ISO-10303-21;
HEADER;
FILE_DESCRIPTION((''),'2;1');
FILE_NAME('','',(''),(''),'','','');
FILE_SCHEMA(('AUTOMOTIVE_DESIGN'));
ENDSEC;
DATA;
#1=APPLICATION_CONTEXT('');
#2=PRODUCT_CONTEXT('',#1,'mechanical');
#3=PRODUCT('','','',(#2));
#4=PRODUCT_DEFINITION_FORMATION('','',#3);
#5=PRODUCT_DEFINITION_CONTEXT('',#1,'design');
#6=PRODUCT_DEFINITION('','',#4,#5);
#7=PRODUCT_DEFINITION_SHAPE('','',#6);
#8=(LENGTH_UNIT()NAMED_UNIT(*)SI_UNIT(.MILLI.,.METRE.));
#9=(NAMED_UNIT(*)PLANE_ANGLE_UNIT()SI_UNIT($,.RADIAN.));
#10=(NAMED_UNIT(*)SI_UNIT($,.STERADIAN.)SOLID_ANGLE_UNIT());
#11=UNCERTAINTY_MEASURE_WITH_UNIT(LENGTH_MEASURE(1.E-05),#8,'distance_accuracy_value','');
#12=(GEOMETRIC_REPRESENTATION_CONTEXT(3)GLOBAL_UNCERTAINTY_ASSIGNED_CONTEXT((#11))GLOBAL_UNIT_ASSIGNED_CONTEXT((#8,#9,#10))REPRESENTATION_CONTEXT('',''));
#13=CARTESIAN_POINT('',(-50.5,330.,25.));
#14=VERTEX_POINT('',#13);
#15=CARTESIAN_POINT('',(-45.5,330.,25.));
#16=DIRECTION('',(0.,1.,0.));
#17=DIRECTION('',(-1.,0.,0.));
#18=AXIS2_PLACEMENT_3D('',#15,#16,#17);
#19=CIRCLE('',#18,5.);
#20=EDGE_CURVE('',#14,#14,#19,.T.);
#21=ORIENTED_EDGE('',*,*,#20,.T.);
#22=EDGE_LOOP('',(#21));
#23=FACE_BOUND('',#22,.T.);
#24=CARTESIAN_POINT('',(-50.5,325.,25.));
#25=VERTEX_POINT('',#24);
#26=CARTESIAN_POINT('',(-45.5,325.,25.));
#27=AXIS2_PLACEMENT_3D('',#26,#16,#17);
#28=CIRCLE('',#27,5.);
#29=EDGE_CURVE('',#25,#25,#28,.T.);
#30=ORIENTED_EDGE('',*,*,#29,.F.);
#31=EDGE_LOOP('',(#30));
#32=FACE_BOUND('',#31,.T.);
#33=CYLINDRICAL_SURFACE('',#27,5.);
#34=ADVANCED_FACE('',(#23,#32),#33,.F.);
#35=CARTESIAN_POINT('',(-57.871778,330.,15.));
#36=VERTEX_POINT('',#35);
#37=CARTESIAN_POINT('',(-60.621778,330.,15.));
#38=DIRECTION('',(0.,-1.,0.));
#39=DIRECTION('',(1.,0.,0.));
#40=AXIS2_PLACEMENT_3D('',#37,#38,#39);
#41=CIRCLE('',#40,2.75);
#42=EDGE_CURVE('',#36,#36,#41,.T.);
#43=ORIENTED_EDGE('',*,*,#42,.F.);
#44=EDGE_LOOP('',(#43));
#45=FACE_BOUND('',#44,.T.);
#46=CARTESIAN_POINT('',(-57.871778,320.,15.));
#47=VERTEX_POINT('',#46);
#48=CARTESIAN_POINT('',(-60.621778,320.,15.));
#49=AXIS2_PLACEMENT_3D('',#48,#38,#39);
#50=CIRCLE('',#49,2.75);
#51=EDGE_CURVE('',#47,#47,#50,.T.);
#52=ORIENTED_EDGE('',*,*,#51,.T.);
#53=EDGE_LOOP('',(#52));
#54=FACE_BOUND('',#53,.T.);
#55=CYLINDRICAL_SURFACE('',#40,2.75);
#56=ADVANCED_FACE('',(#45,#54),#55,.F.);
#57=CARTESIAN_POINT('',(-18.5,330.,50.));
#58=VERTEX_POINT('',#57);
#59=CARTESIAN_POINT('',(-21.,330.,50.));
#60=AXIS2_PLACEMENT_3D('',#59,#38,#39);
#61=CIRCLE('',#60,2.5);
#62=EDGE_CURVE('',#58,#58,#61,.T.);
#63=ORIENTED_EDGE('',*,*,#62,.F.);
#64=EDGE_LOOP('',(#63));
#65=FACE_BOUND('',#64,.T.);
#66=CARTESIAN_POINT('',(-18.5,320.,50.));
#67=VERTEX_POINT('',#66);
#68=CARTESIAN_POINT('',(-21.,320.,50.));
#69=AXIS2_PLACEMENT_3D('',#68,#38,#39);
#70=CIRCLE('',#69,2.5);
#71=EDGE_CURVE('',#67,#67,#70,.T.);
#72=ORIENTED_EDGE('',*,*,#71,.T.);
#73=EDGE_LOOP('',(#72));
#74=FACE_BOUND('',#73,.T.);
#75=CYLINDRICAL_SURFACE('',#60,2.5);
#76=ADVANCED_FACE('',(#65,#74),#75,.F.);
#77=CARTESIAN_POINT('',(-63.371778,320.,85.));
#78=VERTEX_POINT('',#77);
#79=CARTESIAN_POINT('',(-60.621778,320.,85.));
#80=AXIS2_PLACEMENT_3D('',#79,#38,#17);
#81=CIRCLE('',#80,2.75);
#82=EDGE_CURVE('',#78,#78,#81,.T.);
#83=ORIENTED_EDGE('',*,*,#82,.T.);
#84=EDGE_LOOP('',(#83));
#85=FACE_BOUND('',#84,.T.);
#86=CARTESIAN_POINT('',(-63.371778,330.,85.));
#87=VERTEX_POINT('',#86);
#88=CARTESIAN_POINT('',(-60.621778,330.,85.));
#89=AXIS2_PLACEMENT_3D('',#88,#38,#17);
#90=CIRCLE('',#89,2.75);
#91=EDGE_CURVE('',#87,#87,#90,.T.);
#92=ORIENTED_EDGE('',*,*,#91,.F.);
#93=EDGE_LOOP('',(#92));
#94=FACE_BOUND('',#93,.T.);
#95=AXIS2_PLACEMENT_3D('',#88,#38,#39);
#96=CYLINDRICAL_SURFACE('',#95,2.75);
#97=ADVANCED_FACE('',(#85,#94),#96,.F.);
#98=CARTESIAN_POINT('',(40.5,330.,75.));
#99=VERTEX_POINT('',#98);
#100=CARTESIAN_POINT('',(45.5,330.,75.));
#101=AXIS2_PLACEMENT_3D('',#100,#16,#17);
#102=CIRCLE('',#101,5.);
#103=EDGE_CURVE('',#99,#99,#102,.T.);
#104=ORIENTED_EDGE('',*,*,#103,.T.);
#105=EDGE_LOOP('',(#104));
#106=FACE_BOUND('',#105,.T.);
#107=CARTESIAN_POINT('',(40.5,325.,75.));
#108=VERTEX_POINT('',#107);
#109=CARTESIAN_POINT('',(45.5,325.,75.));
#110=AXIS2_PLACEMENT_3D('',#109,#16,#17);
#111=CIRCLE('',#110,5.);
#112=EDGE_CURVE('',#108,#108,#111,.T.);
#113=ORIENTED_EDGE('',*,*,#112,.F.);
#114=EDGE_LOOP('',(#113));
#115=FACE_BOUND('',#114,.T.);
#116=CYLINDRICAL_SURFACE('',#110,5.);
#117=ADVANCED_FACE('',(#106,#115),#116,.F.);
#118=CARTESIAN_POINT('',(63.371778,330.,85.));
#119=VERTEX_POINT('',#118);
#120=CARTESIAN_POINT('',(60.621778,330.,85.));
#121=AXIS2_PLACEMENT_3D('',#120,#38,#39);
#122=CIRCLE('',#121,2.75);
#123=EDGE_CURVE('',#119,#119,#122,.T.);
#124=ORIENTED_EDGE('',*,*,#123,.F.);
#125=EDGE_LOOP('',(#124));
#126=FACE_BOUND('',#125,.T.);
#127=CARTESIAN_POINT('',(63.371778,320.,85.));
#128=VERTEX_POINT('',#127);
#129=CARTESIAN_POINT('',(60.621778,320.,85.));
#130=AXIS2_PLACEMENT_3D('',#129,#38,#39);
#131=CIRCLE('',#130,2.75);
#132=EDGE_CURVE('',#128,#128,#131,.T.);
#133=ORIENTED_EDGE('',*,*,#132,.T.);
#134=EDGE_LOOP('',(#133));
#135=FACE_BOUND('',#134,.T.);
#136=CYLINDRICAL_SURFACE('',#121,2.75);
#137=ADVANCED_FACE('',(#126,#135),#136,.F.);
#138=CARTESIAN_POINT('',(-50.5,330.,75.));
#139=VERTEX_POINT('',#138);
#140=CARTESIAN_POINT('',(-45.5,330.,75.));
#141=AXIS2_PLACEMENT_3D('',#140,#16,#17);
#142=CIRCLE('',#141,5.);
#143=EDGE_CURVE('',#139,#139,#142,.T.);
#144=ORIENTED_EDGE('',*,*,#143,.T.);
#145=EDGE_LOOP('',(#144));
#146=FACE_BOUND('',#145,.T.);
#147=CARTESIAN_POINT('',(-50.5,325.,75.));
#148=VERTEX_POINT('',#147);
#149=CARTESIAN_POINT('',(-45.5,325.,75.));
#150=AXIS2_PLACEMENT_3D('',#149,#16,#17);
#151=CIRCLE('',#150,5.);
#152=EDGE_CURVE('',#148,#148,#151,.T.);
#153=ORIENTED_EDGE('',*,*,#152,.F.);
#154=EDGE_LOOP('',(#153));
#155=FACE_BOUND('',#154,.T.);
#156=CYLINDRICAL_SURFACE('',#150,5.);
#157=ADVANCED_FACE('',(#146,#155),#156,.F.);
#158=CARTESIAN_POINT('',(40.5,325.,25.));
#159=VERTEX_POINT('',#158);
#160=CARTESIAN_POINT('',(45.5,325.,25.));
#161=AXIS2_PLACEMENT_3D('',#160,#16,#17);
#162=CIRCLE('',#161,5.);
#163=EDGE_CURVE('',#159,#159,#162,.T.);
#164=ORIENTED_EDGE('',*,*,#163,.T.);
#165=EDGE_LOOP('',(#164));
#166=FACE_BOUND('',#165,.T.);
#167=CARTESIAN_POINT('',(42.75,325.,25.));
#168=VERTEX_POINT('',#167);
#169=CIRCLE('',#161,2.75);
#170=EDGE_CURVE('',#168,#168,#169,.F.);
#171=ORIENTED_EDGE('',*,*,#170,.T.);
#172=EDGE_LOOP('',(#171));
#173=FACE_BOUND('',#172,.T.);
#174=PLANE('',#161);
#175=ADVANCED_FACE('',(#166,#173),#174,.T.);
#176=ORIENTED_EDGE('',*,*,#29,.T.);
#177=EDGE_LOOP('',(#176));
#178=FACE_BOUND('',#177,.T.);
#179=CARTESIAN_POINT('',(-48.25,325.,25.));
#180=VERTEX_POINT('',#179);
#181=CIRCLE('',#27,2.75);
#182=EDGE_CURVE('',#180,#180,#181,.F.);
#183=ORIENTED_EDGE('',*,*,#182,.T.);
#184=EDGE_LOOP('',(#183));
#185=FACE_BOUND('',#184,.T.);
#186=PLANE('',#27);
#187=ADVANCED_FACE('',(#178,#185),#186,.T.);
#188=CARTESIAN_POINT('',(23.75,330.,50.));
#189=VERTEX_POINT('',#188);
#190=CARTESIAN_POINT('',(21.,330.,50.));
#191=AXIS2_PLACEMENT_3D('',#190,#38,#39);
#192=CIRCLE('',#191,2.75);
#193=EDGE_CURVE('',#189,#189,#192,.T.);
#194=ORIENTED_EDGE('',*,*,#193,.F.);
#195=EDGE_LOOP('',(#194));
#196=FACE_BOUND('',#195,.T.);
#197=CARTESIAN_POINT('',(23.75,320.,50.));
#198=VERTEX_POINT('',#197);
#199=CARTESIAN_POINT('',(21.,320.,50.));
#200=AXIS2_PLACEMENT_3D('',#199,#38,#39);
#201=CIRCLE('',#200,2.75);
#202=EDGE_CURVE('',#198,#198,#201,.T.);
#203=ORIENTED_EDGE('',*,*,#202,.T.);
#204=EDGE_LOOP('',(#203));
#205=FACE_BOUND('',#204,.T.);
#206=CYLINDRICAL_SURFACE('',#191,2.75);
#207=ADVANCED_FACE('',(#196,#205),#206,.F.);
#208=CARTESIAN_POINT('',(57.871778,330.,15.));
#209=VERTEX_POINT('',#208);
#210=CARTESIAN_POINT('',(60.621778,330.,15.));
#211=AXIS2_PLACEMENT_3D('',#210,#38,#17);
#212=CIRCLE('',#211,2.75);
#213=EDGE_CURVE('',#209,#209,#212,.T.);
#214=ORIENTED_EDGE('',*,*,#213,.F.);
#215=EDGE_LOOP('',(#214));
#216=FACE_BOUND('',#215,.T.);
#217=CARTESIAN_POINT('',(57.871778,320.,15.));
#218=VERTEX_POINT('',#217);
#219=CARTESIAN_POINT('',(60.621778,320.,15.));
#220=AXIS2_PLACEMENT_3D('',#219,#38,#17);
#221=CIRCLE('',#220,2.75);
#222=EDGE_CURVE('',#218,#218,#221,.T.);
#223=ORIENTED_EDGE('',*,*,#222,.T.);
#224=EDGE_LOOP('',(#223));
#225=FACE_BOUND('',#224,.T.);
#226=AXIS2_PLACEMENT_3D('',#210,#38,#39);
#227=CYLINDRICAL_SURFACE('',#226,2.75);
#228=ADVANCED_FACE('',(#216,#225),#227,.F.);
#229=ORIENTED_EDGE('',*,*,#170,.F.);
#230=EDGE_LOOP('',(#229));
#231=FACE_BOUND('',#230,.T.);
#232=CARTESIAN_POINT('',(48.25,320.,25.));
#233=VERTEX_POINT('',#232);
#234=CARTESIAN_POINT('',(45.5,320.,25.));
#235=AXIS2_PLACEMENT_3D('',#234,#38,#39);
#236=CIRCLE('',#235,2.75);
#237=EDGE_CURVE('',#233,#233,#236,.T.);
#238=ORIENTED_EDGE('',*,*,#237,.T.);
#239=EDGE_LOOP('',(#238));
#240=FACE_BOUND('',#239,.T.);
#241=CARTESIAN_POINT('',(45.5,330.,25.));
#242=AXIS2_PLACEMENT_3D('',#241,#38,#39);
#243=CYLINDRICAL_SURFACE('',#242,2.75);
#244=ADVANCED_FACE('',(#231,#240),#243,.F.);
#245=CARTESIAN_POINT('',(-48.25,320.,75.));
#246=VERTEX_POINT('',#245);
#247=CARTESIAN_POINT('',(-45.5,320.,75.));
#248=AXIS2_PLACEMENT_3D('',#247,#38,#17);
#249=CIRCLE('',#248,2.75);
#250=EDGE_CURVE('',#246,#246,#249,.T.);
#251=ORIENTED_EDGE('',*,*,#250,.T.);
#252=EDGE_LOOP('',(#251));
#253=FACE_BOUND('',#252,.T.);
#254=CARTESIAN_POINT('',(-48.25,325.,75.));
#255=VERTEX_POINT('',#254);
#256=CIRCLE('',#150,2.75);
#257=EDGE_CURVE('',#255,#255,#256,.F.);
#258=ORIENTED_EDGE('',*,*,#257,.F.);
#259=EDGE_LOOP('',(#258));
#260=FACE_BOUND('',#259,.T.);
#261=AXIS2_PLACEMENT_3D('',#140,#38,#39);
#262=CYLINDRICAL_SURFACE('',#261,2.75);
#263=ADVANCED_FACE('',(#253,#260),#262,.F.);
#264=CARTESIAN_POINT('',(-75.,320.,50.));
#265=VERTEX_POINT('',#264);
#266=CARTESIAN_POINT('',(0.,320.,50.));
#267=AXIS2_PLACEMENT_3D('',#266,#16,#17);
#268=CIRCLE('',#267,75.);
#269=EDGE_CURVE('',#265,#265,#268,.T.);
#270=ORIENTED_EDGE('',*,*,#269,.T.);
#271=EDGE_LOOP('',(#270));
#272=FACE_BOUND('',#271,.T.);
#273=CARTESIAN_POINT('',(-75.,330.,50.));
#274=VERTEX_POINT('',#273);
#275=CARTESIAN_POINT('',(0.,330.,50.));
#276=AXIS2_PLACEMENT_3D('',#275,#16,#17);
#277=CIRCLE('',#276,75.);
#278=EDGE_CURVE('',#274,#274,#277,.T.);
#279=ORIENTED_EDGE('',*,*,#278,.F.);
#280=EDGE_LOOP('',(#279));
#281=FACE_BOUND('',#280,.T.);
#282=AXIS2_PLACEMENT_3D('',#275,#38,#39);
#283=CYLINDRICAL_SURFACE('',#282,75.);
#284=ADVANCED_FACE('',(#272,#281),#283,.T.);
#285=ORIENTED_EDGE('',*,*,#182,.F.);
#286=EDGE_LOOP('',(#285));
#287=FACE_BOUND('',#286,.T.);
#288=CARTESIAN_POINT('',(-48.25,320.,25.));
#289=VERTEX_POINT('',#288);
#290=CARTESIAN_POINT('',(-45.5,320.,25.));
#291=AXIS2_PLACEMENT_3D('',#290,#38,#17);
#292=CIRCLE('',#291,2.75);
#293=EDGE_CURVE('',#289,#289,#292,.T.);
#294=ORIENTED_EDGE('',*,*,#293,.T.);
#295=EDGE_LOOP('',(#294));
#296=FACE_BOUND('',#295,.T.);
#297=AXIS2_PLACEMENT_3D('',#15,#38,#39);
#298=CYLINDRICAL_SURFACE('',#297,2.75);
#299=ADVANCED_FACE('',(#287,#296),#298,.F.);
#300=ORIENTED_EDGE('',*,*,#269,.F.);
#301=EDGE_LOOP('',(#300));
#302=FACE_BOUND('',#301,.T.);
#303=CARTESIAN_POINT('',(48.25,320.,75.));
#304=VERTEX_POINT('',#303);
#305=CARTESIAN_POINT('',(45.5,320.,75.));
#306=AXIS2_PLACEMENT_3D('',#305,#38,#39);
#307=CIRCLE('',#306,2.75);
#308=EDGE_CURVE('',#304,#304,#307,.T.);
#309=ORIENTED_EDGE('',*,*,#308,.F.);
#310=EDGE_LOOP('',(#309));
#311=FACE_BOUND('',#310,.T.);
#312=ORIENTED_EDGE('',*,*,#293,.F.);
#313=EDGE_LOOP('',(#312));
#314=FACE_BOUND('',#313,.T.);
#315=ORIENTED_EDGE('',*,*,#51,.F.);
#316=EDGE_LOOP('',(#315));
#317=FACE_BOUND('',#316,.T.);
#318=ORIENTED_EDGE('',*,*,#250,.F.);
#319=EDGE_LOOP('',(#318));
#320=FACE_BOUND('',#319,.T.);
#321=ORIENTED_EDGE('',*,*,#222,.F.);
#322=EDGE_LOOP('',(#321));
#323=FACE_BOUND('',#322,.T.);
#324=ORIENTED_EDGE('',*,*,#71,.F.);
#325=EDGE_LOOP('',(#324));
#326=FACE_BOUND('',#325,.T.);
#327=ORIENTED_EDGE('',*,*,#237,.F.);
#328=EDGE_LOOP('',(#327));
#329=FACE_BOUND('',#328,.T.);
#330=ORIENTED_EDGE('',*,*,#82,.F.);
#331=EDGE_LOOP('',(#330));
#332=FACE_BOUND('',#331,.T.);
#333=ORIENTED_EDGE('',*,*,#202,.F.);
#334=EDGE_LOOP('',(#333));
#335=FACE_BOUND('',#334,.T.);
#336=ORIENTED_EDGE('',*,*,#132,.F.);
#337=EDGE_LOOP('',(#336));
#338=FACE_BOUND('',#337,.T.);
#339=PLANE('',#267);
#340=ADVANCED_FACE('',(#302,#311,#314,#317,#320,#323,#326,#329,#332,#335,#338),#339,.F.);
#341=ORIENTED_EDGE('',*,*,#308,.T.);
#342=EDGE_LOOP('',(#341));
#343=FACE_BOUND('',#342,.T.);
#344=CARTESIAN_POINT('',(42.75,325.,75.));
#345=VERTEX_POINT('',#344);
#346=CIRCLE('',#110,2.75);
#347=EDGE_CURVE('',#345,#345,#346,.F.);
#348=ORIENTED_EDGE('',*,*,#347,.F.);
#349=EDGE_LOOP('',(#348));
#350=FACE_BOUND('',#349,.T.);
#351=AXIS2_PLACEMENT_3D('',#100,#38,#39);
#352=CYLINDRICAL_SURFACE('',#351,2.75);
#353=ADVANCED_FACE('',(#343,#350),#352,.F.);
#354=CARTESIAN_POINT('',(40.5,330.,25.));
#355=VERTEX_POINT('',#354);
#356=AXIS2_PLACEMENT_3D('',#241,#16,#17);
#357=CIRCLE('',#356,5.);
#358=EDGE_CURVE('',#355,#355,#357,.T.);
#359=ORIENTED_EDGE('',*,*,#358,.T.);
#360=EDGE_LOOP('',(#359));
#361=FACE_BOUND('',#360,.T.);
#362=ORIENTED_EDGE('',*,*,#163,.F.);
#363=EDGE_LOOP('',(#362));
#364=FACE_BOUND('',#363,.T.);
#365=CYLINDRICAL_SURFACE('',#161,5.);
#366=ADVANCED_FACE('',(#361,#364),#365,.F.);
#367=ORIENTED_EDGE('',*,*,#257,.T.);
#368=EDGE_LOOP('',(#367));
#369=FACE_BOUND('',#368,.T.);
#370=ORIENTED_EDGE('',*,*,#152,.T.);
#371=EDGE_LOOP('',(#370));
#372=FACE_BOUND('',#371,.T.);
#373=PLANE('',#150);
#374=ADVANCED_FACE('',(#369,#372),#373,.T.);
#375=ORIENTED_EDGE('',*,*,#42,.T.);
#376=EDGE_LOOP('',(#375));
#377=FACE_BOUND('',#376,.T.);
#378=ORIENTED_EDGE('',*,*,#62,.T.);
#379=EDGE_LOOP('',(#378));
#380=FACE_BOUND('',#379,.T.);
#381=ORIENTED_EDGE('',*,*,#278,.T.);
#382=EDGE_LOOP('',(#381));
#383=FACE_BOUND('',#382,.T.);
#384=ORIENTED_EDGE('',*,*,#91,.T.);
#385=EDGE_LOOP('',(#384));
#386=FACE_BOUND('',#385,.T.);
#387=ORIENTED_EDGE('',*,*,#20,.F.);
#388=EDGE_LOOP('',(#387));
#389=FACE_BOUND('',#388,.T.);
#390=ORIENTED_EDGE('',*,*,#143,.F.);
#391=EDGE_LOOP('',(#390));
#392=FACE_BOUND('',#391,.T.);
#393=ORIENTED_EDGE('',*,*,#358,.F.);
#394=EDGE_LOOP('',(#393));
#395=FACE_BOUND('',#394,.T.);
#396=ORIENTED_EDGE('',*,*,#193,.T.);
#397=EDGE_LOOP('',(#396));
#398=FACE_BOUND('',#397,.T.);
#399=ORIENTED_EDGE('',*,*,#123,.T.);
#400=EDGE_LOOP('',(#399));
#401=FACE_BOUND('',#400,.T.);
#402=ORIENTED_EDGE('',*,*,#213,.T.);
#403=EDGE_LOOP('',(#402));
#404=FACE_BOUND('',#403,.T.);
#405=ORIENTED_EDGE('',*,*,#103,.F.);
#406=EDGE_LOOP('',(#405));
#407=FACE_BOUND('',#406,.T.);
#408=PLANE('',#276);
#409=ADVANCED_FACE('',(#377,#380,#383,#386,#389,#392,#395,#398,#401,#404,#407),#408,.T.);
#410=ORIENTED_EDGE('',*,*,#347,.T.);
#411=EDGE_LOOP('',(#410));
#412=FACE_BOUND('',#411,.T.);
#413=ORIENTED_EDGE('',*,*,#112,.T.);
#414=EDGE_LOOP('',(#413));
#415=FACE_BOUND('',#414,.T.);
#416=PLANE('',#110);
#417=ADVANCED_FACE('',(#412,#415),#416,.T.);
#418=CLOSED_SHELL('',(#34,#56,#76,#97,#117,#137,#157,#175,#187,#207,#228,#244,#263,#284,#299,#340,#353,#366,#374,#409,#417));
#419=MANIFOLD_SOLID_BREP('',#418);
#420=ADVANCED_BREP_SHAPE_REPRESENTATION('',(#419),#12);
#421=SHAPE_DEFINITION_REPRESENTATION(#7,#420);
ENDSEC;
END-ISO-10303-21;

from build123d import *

# Parameters (mm, degrees)
SKETCH_1_R                   = 11
EXTRUDE_567_DEPTH            = 100
EXTRUDE_START                = -100
SKETCH_2_R                   = 11
EXTRUDE_876_DEPTH            = 100
EXTRUDE_2692_DEPTH           = 100
CUT_EXTRUDE_4149_DEPTH       = 534.010318849
CUT_EXTRUDE_4149_DEPTH_BACK  = 534.010318849
SKETCH_3_W                   = 90
SKETCH_3_H                   = 380
SKETCH_5_R                   = 2.5
EXTRUDE_4715_DEPTH           = 100
SKETCH_6_W                   = 191.177045066
SKETCH_6_H                   = 235.084722287
CUT_EXTRUDE_5029_DEPTH       = 84
SKETCH_7_R                   = 75
EXTRUDE_5317_DEPTH           = 10
CUT_EXTRUDE_6099_DEPTH       = 361.763080151
CUT_EXTRUDE_6099_DEPTH_BACK  = 361.763080151
FILLET_2_R                   = 2
MIRROR_START                 = 95
MIRROR_1_DEPTH               = 5
CUT_EXTRUDE_11152_DEPTH      = 361.763080151
CUT_EXTRUDE_11152_DEPTH_BACK = 361.763080151
SKETCH_12_W                  = 10
SKETCH_12_H                  = 20
FILLET_3_R                   = 1
CUT_EXTRUDE_START            = -5
CUT_EXTRUDE_12033_OUTLINE_R  = 5
CUT_EXTRUDE_12033_DEPTH      = 5
CUT_EXTRUDE_7_DEPTH          = 361.763080151
CUT_EXTRUDE_7_DEPTH_BACK     = 361.763080151
SKETCH_14_W                  = 10
SKETCH_14_H                  = 20
FILLET_4_R                   = 1
CUT_EXTRUDE_START_2          = -129
SKETCH_15_R                  = 11
CUT_EXTRUDE_8_DEPTH          = 129
SKETCH_16_R                  = 13
CUT_EXTRUDE_9_DEPTH          = 0.75
CUT_EXTRUDE_START_3          = -0.75
SKETCH_17_R                  = 13
CUT_EXTRUDE_10_DEPTH         = 0.75
SKETCH_18_R                  = 9.5
CUT_EXTRUDE_11_DEPTH         = 113
CUT_EXTRUDE_12_DEPTH         = 361.763080151
CUT_EXTRUDE_12_DEPTH_BACK    = 361.763080151
CUT_EXTRUDE_13_DEPTH         = 147.116391962
CUT_EXTRUDE_13_DEPTH_BACK    = 147.116391962
SKETCH_22_R                  = 2.75
SKETCH_22_R_2                = 2.5
SKETCH_26_R                  = 5
CUT_EXTRUDE_15_DEPTH         = 5


# Read off the part's stored shape, not the designer's step: 镜向1, 电机安装轴承孔
with BuildPart() as part:
    # 草图1 → Extrude 567 (new body)
    with BuildSketch(Plane.XY):
        with BuildLine():
            Line((-18, 500), (-18, 0))
            ThreePointArc((-18, 0), (0, -18), (18, 0))
            Line((18, 0), (18, 500))
            ThreePointArc((18, 500), (0, 518), (-18, 500))
        make_face()
        with Locations((0, 500)):
            Circle(SKETCH_1_R, mode=Mode.SUBTRACT)
        Circle(SKETCH_1_R, mode=Mode.SUBTRACT)
    extrude(amount=EXTRUDE_567_DEPTH)

    # 草图2 → Extrude 876 (add)
    with BuildSketch(Plane.XY.offset(100).offset(EXTRUDE_START)):
        with BuildLine():
            Line((18, 61.301270189), (25, 61.301270189))
            ThreePointArc((25, 61.301270189), (40.588457268, 52.301270189), (40.588457268, 34.301270189))
            Line((40.588457268, 34.301270189), (15.588457268, -9))
            ThreePointArc((15.588457268, -9), (-4.658742812, -17.386664873), (-18, 0))
            Line((-18, 0), (-18, 61.301270189))
            Line((-18, 61.301270189), (18, 61.301270189))
        make_face()
        with Locations((25, 43.301270189)):
            Circle(SKETCH_2_R, mode=Mode.SUBTRACT)
        Circle(SKETCH_2_R, mode=Mode.SUBTRACT)
    extrude(amount=EXTRUDE_876_DEPTH)

    # 草图10 → Extrude 2692 (add)
    with BuildSketch(Plane(origin=(0, 0, 0), x_dir=(-1, 0, 0), z_dir=(0, 0, -1))):
        with BuildLine():
            Line((-41.914467174, 37.144907609), (-58, 81.339545828))
            Line((-58, 81.339545828), (-58, 320))
            Line((-58, 320), (-18, 320))
            Line((-18, 320), (-18, 61.301270189))
            Line((-18, 61.301270189), (-25, 61.301270189))
            ThreePointArc((-25, 61.301270189), (-39.744736797, 53.625646044), (-41.914467174, 37.144907609))
        make_face()
        with BuildLine():
            Line((12.727922061, -12.727922061), (58, 32.544155877))
            Line((58, 32.544155877), (58, 320))
            Line((58, 320), (18, 320))
            Line((18, 320), (18, 0))
            ThreePointArc((18, 0), (16.629831585, -6.888301783), (12.727922061, -12.727922061))
        make_face()
    extrude(amount=-EXTRUDE_2692_DEPTH)

    # 草图3 → Cut-Extrude 4149 (cut, two sides: drawn at the far end of the back side and taken through both)
    with BuildSketch(Plane.ZY.offset(18).offset(-CUT_EXTRUDE_4149_DEPTH_BACK)):
        with Locations((50, 150)):
            Rectangle(SKETCH_3_W, SKETCH_3_H)
    extrude(amount=CUT_EXTRUDE_4149_DEPTH + CUT_EXTRUDE_4149_DEPTH_BACK, mode=Mode.SUBTRACT)

    # 草图5 → Extrude 4715 (add)
    with BuildSketch(Plane.XY.offset(100)):
        with Locations(Location((0, 250, 0), (0, 0, 90))):
            Circle(SKETCH_5_R)
    extrude(amount=-EXTRUDE_4715_DEPTH)

    # 草图6 → Cut-Extrude 5029 (cut)
    with BuildSketch(Plane(origin=(18, 0, 0), x_dir=(0, 0, -1), z_dir=(1, 0, 0))):
        with Locations((-50.962374235, 437.542361144)):
            Rectangle(SKETCH_6_W, SKETCH_6_H)
    extrude(amount=-CUT_EXTRUDE_5029_DEPTH, mode=Mode.SUBTRACT)

    # 草图7 → Extrude 5317 (add)
    with BuildSketch(Plane(origin=(0, 320, 0), x_dir=(1, 0, 0), z_dir=(0, 1, 0))):
        with Locations(Location((0, -50, 0), (0, 0, 320.654170234))):
            Circle(SKETCH_7_R)
    extrude(amount=EXTRUDE_5317_DEPTH)

    # 草图10<3> → Cut-Extrude 6099 (cut, two sides: drawn at the far end of the back side and taken through both)
    with BuildSketch(Plane(origin=(0, 0, 0), x_dir=(-1, 0, 0), z_dir=(0, 0, -1)).offset(-CUT_EXTRUDE_6099_DEPTH_BACK)):
        Polygon((50, 310), (18, 310), (18, 278), align=None)
        Polygon((-18, 278), (-18, 310), (-50, 310), align=None)
        Polygon((-18, 227.925713543), (-18, 259.925713543), (-50, 259.925713543), align=None)
        Polygon((50, 259.925713543), (18, 259.925713543), (18, 227.925713543), align=None)
        Polygon((50, 248.612005044), (50, 216.612005044), (18, 216.612005044), align=None)
        Polygon((-50, 248.612005044), (-50, 216.612005044), (-18, 216.612005044), align=None)
        Polygon((-18, 177.851427085), (-18, 209.851427085), (-50, 209.851427085), align=None)
        Polygon((50, 209.851427085), (18, 209.851427085), (18, 177.851427085), align=None)
        Polygon((50, 198.537718586), (50, 166.537718586), (18, 166.537718586), align=None)
        Polygon((-50, 198.537718586), (-50, 166.537718586), (-18, 166.537718586), align=None)
        Polygon((-50, 159.777140628), (-18, 127.777140628), (-18, 159.777140628), align=None)
        Polygon((18, 159.777140628), (18, 127.777140628), (50, 159.777140628), align=None)
        Polygon((-50, 109.702854171), (-18, 77.702854171), (-18, 109.702854171), align=None)
        Polygon((18, 109.702854171), (18, 77.702854171), (50, 109.702854171), align=None)
        Polygon((-50, 98.389145672), (-50, 82.750161674), (-44.045077173, 66.389145672), (-18, 66.389145672), align=None)
        Polygon((18, 56.800140588), (18, 24.800140588), (50, 56.800140588), align=None)
        Polygon((50, 95.560718547), (50, 63.560718547), (18, 63.560718547), align=None)
        Polygon((50, 116.463432129), (18, 116.463432129), (50, 148.463432129), align=None)
    extrude(amount=CUT_EXTRUDE_6099_DEPTH + CUT_EXTRUDE_6099_DEPTH_BACK, mode=Mode.SUBTRACT)

    # 圆角2
    fillet_2_edges = [part.edges().sort_by_distance(p)[0] for p in [
        (50, 109.702854171, 2.5),
        (18, 109.702854171, 2.5),
        (18, 77.702854171, 2.5),
        (-18, 159.777140628, 2.5),
        (-50, 159.777140628, 2.5),
        (-18, 127.777140628, 2.5),
        (50, 159.777140628, 2.5),
        (18, 159.777140628, 2.5),
        (18, 127.777140628, 2.5),
        (50, 166.537718586, 2.5),
        (50, 198.537718586, 2.5),
        (18, 166.537718586, 2.5),
        (-50, 63.560718547, 2.5),
        (-18, 63.560718547, 2.5),
        (-50, 95.560718547, 2.5),
        (-50, 56.800140588, 2.5),
        (-18, 24.800140588, 2.5),
        (-18, 56.800140588, 2.5),
        (50, 82.750161674, 2.5),
        (50, 98.389145672, 2.5),
        (18, 66.389145672, 2.5),
        (44.045077173, 66.389145672, 2.5),
        (-18, 109.702854171, 2.5),
        (-50, 109.702854171, 2.5),
        (-18, 77.702854171, 2.5),
        (50, 310, 2.5),
        (18, 310, 2.5),
        (18, 278, 2.5),
        (50, 259.925713543, 2.5),
        (18, 259.925713543, 2.5),
        (18, 227.925713543, 2.5),
        (-50, 248.612005044, 2.5),
        (-50, 216.612005044, 2.5),
        (-18, 216.612005044, 2.5),
        (-18, 259.925713543, 2.5),
        (-50, 259.925713543, 2.5),
        (-18, 227.925713543, 2.5),
        (50, 216.612005044, 2.5),
        (50, 248.612005044, 2.5),
        (18, 216.612005044, 2.5),
        (50, 209.851427085, 2.5),
        (18, 209.851427085, 2.5),
        (18, 177.851427085, 2.5),
        (-50, 198.537718586, 2.5),
        (-50, 166.537718586, 2.5),
        (-18, 166.537718586, 2.5),
        (-18, 209.851427085, 2.5),
        (-50, 209.851427085, 2.5),
        (-18, 177.851427085, 2.5),
        (-50, 148.463432129, 2.5),
        (-50, 116.463432129, 2.5),
        (-18, 116.463432129, 2.5),
        (-18, 310, 2.5),
        (-50, 310, 2.5),
        (-18, 278, 2.5),
    ]]
    fillet(fillet_2_edges, radius=FILLET_2_R)

    # 镜向1 outline → 镜向1 (add)
    with BuildSketch(Plane.XY.offset(MIRROR_START)):
        with BuildLine():
            ThreePointArc((-50, 143.635005004), (-48.765366865, 145.482764069), (-46.585786438, 145.049218567))
            Line((-46.585786438, 145.049218567), (-50, 148.463432129))
            Line((-50, 148.463432129), (-50, 143.635005004))
        make_face()
        with BuildLine():
            Line((-18, 116.463432129), (-21.414213562, 119.877645691))
            ThreePointArc((-21.414213562, 119.877645691), (-20.98066806, 117.698065264), (-22.828427125, 116.463432129))
            Line((-22.828427125, 116.463432129), (-18, 116.463432129))
        make_face()
        with BuildLine():
            ThreePointArc((-48, 116.463432129), (-49.414213562, 117.049218567), (-50, 118.463432129))
            Line((-50, 118.463432129), (-50, 116.463432129))
            Line((-50, 116.463432129), (-48, 116.463432129))
        make_face()
        with BuildLine():
            ThreePointArc((-20, 310), (-18.585786438, 309.414213562), (-18, 308))
            Line((-18, 308), (-18, 310))
            Line((-18, 310), (-20, 310))
        make_face()
        with BuildLine():
            Line((-18, 278), (-18, 282.828427125))
            ThreePointArc((-18, 282.828427125), (-19.234633135, 280.98066806), (-21.414213562, 281.414213562))
            Line((-21.414213562, 281.414213562), (-18, 278))
        make_face()
        with BuildLine():
            ThreePointArc((-46.585786438, 306.585786438), (-47.01933194, 308.765366865), (-45.171572875, 310))
            Line((-45.171572875, 310), (-50, 310))
            Line((-50, 310), (-46.585786438, 306.585786438))
        make_face()
        with BuildLine():
            ThreePointArc((-20, 259.925713543), (-18.585786438, 259.339927105), (-18, 257.925713543))
            Line((-18, 257.925713543), (-18, 259.925713543))
            Line((-18, 259.925713543), (-20, 259.925713543))
        make_face()
        with BuildLine():
            Line((-18, 227.925713543), (-18, 232.754140667))
            ThreePointArc((-18, 232.754140667), (-19.234633135, 230.906381602), (-21.414213562, 231.339927105))
            Line((-21.414213562, 231.339927105), (-18, 227.925713543))
        make_face()
        with BuildLine():
            ThreePointArc((-46.585786438, 256.51149998), (-47.01933194, 258.691080407), (-45.171572875, 259.925713543))
            Line((-45.171572875, 259.925713543), (-50, 259.925713543))
            Line((-50, 259.925713543), (-46.585786438, 256.51149998))
        make_face()
        with BuildLine():
            ThreePointArc((-50, 243.783577919), (-48.765366865, 245.631336984), (-46.585786438, 245.197791481))
            Line((-46.585786438, 245.197791481), (-50, 248.612005044))
            Line((-50, 248.612005044), (-50, 243.783577919))
        make_face()
        with BuildLine():
            Line((-18, 216.612005044), (-21.414213562, 220.026218606))
            ThreePointArc((-21.414213562, 220.026218606), (-20.98066806, 217.846638179), (-22.828427125, 216.612005044))
            Line((-22.828427125, 216.612005044), (-18, 216.612005044))
        make_face()
        with BuildLine():
            ThreePointArc((-48, 216.612005044), (-49.414213563, 217.197791481), (-50, 218.612005044))
            Line((-50, 218.612005044), (-50, 216.612005044))
            Line((-50, 216.612005044), (-48, 216.612005044))
        make_face()
        with BuildLine():
            ThreePointArc((-20, 209.851427085), (-18.585786438, 209.265640647), (-18, 207.851427085))
            Line((-18, 207.851427085), (-18, 209.851427085))
            Line((-18, 209.851427085), (-20, 209.851427085))
        make_face()
        with BuildLine():
            Line((-18, 177.851427085), (-18, 182.67985421))
            ThreePointArc((-18, 182.67985421), (-19.234633135, 180.832095145), (-21.414213562, 181.265640648))
            Line((-21.414213562, 181.265640648), (-18, 177.851427085))
        make_face()
        with BuildLine():
            ThreePointArc((-46.585786438, 206.437213523), (-47.01933194, 208.61679395), (-45.171572875, 209.851427085))
            Line((-45.171572875, 209.851427085), (-50, 209.851427085))
            Line((-50, 209.851427085), (-46.585786438, 206.437213523))
        make_face()
        with BuildLine():
            ThreePointArc((-50, 193.709291462), (-48.765366865, 195.557050527), (-46.585786438, 195.123505024))
            Line((-46.585786438, 195.123505024), (-50, 198.537718586))
            Line((-50, 198.537718586), (-50, 193.709291462))
        make_face()
        with BuildLine():
            Line((-18, 166.537718586), (-21.414213562, 169.951932149))
            ThreePointArc((-21.414213562, 169.951932149), (-20.98066806, 167.772351722), (-22.828427125, 166.537718586))
            Line((-22.828427125, 166.537718586), (-18, 166.537718586))
        make_face()
        with BuildLine():
            ThreePointArc((-48, 166.537718586), (-49.414213562, 167.123505024), (-50, 168.537718586))
            Line((-50, 168.537718586), (-50, 166.537718586))
            Line((-50, 166.537718586), (-48, 166.537718586))
        make_face()
        with BuildLine():
            ThreePointArc((-20, 159.777140628), (-18.585786438, 159.19135419), (-18, 157.777140628))
            Line((-18, 157.777140628), (-18, 159.777140628))
            Line((-18, 159.777140628), (-20, 159.777140628))
        make_face()
        with BuildLine():
            Line((-18, 127.777140628), (-18, 132.605567753))
            ThreePointArc((-18, 132.605567753), (-19.234633135, 130.757808688), (-21.414213562, 131.19135419))
            Line((-21.414213562, 131.19135419), (-18, 127.777140628))
        make_face()
        with BuildLine():
            ThreePointArc((-46.585786438, 156.362927066), (-47.01933194, 158.542507493), (-45.171572875, 159.777140628))
            Line((-45.171572875, 159.777140628), (-50, 159.777140628))
            Line((-50, 159.777140628), (-46.585786438, 156.362927066))
        make_face()
        with BuildLine():
            ThreePointArc((-20, 109.702854171), (-18.585786438, 109.117067733), (-18, 107.702854171))
            Line((-18, 107.702854171), (-18, 109.702854171))
            Line((-18, 109.702854171), (-20, 109.702854171))
        make_face()
        with BuildLine():
            Line((-18, 77.702854171), (-18, 82.531281295))
            ThreePointArc((-18, 82.531281295), (-19.234633135, 80.68352223), (-21.414213562, 81.117067733))
            Line((-21.414213562, 81.117067733), (-18, 77.702854171))
        make_face()
        with BuildLine():
            ThreePointArc((-46.585786438, 106.288640608), (-47.01933194, 108.468221035), (-45.171572875, 109.702854171))
            Line((-45.171572875, 109.702854171), (-50, 109.702854171))
            Line((-50, 109.702854171), (-46.585786438, 106.288640608))
        make_face()
        with BuildLine():
            ThreePointArc((-50, 90.732291422), (-48.765366865, 92.580050487), (-46.585786438, 92.146504984))
            Line((-46.585786438, 92.146504984), (-50, 95.560718547))
            Line((-50, 95.560718547), (-50, 90.732291422))
        make_face()
        with BuildLine():
            Line((-18, 63.560718547), (-21.414213562, 66.974932109))
            ThreePointArc((-21.414213562, 66.974932109), (-20.98066806, 64.795351682), (-22.828427125, 63.560718547))
            Line((-22.828427125, 63.560718547), (-18, 63.560718547))
        make_face()
        with BuildLine():
            ThreePointArc((-48, 63.560718547), (-49.414213562, 64.146504984), (-50, 65.560718547))
            Line((-50, 65.560718547), (-50, 63.560718547))
            Line((-50, 63.560718547), (-48, 63.560718547))
        make_face()
        with BuildLine():
            ThreePointArc((-46.585786438, 53.385927026), (-47.01933194, 55.565507453), (-45.171572875, 56.800140588))
            Line((-45.171572875, 56.800140588), (-50, 56.800140588))
            Line((-50, 56.800140588), (-46.585786438, 53.385927026))
        make_face()
        with BuildLine():
            Line((-18, 56.800140588), (-20, 56.800140588))
            ThreePointArc((-20, 56.800140588), (-18.585786437, 56.214354151), (-18, 54.800140588))
            Line((-18, 54.800140588), (-18, 56.800140588))
        make_face()
        with BuildLine():
            ThreePointArc((-18, 29.628567713), (-19.234633135, 27.780808648), (-21.414213562, 28.214354151))
            Line((-21.414213562, 28.214354151), (-18, 24.800140588))
            Line((-18, 24.800140588), (-18, 29.628567713))
        make_face()
        with BuildLine():
            ThreePointArc((46.585786438, 94.974932109), (48.765366865, 95.408477612), (50, 93.560718547))
            Line((50, 93.560718547), (50, 98.389145672))
            Line((50, 98.389145672), (46.585786438, 94.974932109))
        make_face()
        with BuildLine():
            Line((50, 82.750161674), (50, 83.102815635))
            ThreePointArc((50, 83.102815635), (49.969615506, 82.75551928), (49.879385242, 82.418775349))
            Line((49.879385242, 82.418775349), (50, 82.750161674))
        make_face()
        with BuildLine():
            ThreePointArc((22.828427125, 66.389145672), (20.98066806, 67.623778807), (21.414213562, 69.803359234))
            Line((21.414213562, 69.803359234), (18, 66.389145672))
            Line((18, 66.389145672), (22.828427125, 66.389145672))
        make_face()
        with BuildLine():
            Line((44.045077173, 66.389145672), (44.524047338, 67.705105385))
            ThreePointArc((44.524047338, 67.705105385), (43.791814969, 66.750841583), (42.644662096, 66.389145672))
            Line((42.644662096, 66.389145672), (44.045077173, 66.389145672))
        make_face()
        with BuildLine():
            Line((18, 109.702854171), (18, 107.702854171))
            ThreePointArc((18, 107.702854171), (18.585786438, 109.117067733), (20, 109.702854171))
            Line((20, 109.702854171), (18, 109.702854171))
        make_face()
        with BuildLine():
            ThreePointArc((21.414213562, 81.117067733), (19.234633135, 80.68352223), (18, 82.531281295))
            Line((18, 82.531281295), (18, 77.702854171))
            Line((18, 77.702854171), (21.414213562, 81.117067733))
        make_face()
        with BuildLine():
            Line((50, 109.702854171), (45.171572875, 109.702854171))
            ThreePointArc((45.171572875, 109.702854171), (47.01933194, 108.468221035), (46.585786438, 106.288640608))
            Line((46.585786438, 106.288640608), (50, 109.702854171))
        make_face()
        with BuildLine():
            Line((18, 159.777140628), (18, 157.777140628))
            ThreePointArc((18, 157.777140628), (18.585786438, 159.19135419), (20, 159.777140628))
            Line((20, 159.777140628), (18, 159.777140628))
        make_face()
        with BuildLine():
            ThreePointArc((21.414213562, 131.19135419), (19.234633135, 130.757808688), (18, 132.605567753))
            Line((18, 132.605567753), (18, 127.777140628))
            Line((18, 127.777140628), (21.414213562, 131.19135419))
        make_face()
        with BuildLine():
            Line((50, 159.777140628), (45.171572875, 159.777140628))
            ThreePointArc((45.171572875, 159.777140628), (47.01933194, 158.542507493), (46.585786438, 156.362927066))
            Line((46.585786438, 156.362927066), (50, 159.777140628))
        make_face()
        with BuildLine():
            ThreePointArc((50, 168.537718586), (49.414213562, 167.123505024), (48, 166.537718586))
            Line((48, 166.537718586), (50, 166.537718586))
            Line((50, 166.537718586), (50, 168.537718586))
        make_face()
        with BuildLine():
            Line((18, 166.537718586), (22.828427125, 166.537718586))
            ThreePointArc((22.828427125, 166.537718586), (20.98066806, 167.772351722), (21.414213562, 169.951932149))
            Line((21.414213562, 169.951932149), (18, 166.537718586))
        make_face()
        with BuildLine():
            ThreePointArc((46.585786438, 195.123505024), (48.765366865, 195.557050527), (50, 193.709291462))
            Line((50, 193.709291462), (50, 198.537718586))
            Line((50, 198.537718586), (46.585786438, 195.123505024))
        make_face()
        with BuildLine():
            Line((18, 177.851427085), (21.414213562, 181.265640648))
            ThreePointArc((21.414213562, 181.265640648), (19.234633135, 180.832095145), (18, 182.67985421))
            Line((18, 182.67985421), (18, 177.851427085))
        make_face()
        with BuildLine():
            ThreePointArc((45.171572875, 209.851427085), (47.01933194, 208.61679395), (46.585786438, 206.437213523))
            Line((46.585786438, 206.437213523), (50, 209.851427085))
            Line((50, 209.851427085), (45.171572875, 209.851427085))
        make_face()
        with BuildLine():
            Line((18, 209.851427085), (18, 207.851427085))
            ThreePointArc((18, 207.851427085), (18.585786438, 209.265640647), (20, 209.851427085))
            Line((20, 209.851427085), (18, 209.851427085))
        make_face()
        with BuildLine():
            ThreePointArc((50, 218.612005044), (49.414213563, 217.197791481), (48, 216.612005044))
            Line((48, 216.612005044), (50, 216.612005044))
            Line((50, 216.612005044), (50, 218.612005044))
        make_face()
        with BuildLine():
            Line((18, 216.612005044), (22.828427125, 216.612005044))
            ThreePointArc((22.828427125, 216.612005044), (20.98066806, 217.846638179), (21.414213562, 220.026218606))
            Line((21.414213562, 220.026218606), (18, 216.612005044))
        make_face()
        with BuildLine():
            ThreePointArc((46.585786438, 245.197791481), (48.765366865, 245.631336984), (50, 243.783577919))
            Line((50, 243.783577919), (50, 248.612005044))
            Line((50, 248.612005044), (46.585786438, 245.197791481))
        make_face()
        with BuildLine():
            Line((18, 227.925713543), (21.414213562, 231.339927105))
            ThreePointArc((21.414213562, 231.339927105), (19.234633135, 230.906381602), (18, 232.754140667))
            Line((18, 232.754140667), (18, 227.925713543))
        make_face()
        with BuildLine():
            ThreePointArc((45.171572875, 259.925713543), (47.01933194, 258.691080407), (46.585786438, 256.51149998))
            Line((46.585786438, 256.51149998), (50, 259.925713543))
            Line((50, 259.925713543), (45.171572875, 259.925713543))
        make_face()
        with BuildLine():
            Line((18, 259.925713543), (18, 257.925713543))
            ThreePointArc((18, 257.925713543), (18.585786438, 259.339927105), (20, 259.925713543))
            Line((20, 259.925713543), (18, 259.925713543))
        make_face()
        with BuildLine():
            Line((18, 278), (21.414213562, 281.414213562))
            ThreePointArc((21.414213562, 281.414213562), (19.234633135, 280.98066806), (18, 282.828427125))
            Line((18, 282.828427125), (18, 278))
        make_face()
        with BuildLine():
            ThreePointArc((45.171572875, 310), (47.01933194, 308.765366865), (46.585786438, 306.585786438))
            Line((46.585786438, 306.585786438), (50, 310))
            Line((50, 310), (45.171572875, 310))
        make_face()
        with BuildLine():
            Line((18, 310), (18, 308))
            ThreePointArc((18, 308), (18.585786438, 309.414213562), (20, 310))
            Line((20, 310), (18, 310))
        make_face()
    extrude(amount=MIRROR_1_DEPTH)

    # 草图12 → Cut-Extrude 11152 (cut, two sides: drawn at the far end of the back side and taken through both)
    with BuildSketch(Plane(origin=(0, 0, 0), x_dir=(-1, 0, 0), z_dir=(0, 0, -1)).offset(-CUT_EXTRUDE_11152_DEPTH_BACK)):
        with Locations((-53, 285)):
            Rectangle(SKETCH_12_W, SKETCH_12_H)
        with Locations((-53, 134.702854171)):
            Rectangle(SKETCH_12_W, SKETCH_12_H)
        with Locations((53, 285)):
            Rectangle(SKETCH_12_W, SKETCH_12_H)
    extrude(amount=CUT_EXTRUDE_11152_DEPTH + CUT_EXTRUDE_11152_DEPTH_BACK, mode=Mode.SUBTRACT)

    # 圆角3
    fillet_3_edges = [part.edges().sort_by_distance(p)[0] for p in [
        (-48, 275, 2.5),
        (-48, 295, 2.5),
        (-48, 275, 97.5),
        (-48, 295, 97.5),
        (48, 144.702854171, 2.5),
        (48, 124.702854171, 2.5),
        (48, 144.702854171, 97.5),
        (48, 124.702854171, 97.5),
        (48, 295, 2.5),
        (48, 275, 2.5),
        (48, 295, 97.5),
        (48, 275, 97.5),
    ]]
    fillet(fillet_3_edges, radius=FILLET_3_R)

    # Cut-Extrude 12033 outline → Cut-Extrude 12033 (cut)
    with BuildSketch(Plane.XY.offset(5).offset(CUT_EXTRUDE_START)):
        with Locations((0, 250)):
            Circle(CUT_EXTRUDE_12033_OUTLINE_R)
    cut_extrude_12033 = extrude(amount=CUT_EXTRUDE_12033_DEPTH, mode=Mode.SUBTRACT)

    # 镜向2: Cut-Extrude 12033 across plane
    add(cut_extrude_12033.mirror(Plane(origin=(0, 0, 50), x_dir=(1, 0, 0), z_dir=(0, 0, -1))), mode=Mode.SUBTRACT)

    # 草图14 → 切除-拉伸7 (cut, two sides: drawn at the far end of the back side and taken through both)
    with BuildSketch(Plane(origin=(0, 0, 0), x_dir=(-1, 0, 0), z_dir=(0, 0, -1)).offset(-CUT_EXTRUDE_7_DEPTH_BACK)):
        with Locations((0, 110)):
            Rectangle(SKETCH_14_W, SKETCH_14_H)
    extrude(amount=CUT_EXTRUDE_7_DEPTH + CUT_EXTRUDE_7_DEPTH_BACK, mode=Mode.SUBTRACT)

    # 圆角4
    fillet_4_edges = [part.edges().sort_by_distance(p)[0] for p in [
        (5, 100, 2.5),
        (5, 120, 2.5),
        (-5, 120, 2.5),
        (-5, 100, 2.5),
        (5, 100, 97.5),
        (5, 120, 97.5),
        (-5, 120, 97.5),
        (-5, 100, 97.5),
    ]]
    fillet(fillet_4_edges, radius=FILLET_4_R)

    # 草图15 → 切除-拉伸8 (cut)
    with BuildSketch(Plane.XY.offset(100).offset(CUT_EXTRUDE_START_2)):
        with Locations((25, 43.301270189)):
            Circle(SKETCH_15_R)
    extrude(amount=CUT_EXTRUDE_8_DEPTH, mode=Mode.SUBTRACT)

    # 草图16 → 切除-拉伸9 (cut)
    with BuildSketch(Plane.XY.offset(100)):
        with Locations((25, 43.301270189)):
            Circle(SKETCH_16_R)
        Circle(SKETCH_16_R)
    extrude(amount=-CUT_EXTRUDE_9_DEPTH, mode=Mode.SUBTRACT)

    # 草图17 → 切除-拉伸10 (cut)
    with BuildSketch(Plane(origin=(0, 0, 0), x_dir=(-1, 0, 0), z_dir=(0, 0, -1)).offset(CUT_EXTRUDE_START_3)):
        with Locations(Location((0, 0, 0), (0, 0, 180))):
            Circle(SKETCH_17_R)
        with Locations(Location((-25, 43.301270189, 0), (0, 0, 180))):
            Circle(SKETCH_17_R)
    extrude(amount=CUT_EXTRUDE_10_DEPTH, mode=Mode.SUBTRACT)

    # 草图18 → 切除-拉伸11 (cut)
    with BuildSketch(Plane.XY.offset(100)):
        with Locations((0, 250)):
            Circle(SKETCH_18_R)
    extrude(amount=-CUT_EXTRUDE_11_DEPTH, mode=Mode.SUBTRACT)

    # 草图19 → 旋转1 (revolve)
    with BuildSketch(Plane(origin=(0, 0, 0), x_dir=(0, 0, -1), z_dir=(1, 0, 0)), mode=Mode.PRIVATE) as revolve_1_sk:
        Polygon((0, 239.5), (2, 239.5), (2, 241.5), (1, 241.5), (1, 240.5), (0, 240.5), align=None)
        Polygon((-100, 239.5), (-102, 239.5), (-102, 241.5), (-101, 241.5), (-101, 240.5), (-100, 240.5), align=None)
    revolve(revolve_1_sk.sketch.rotate(Axis((0, 250, 0), (0, 0, 1)), 270), axis=Axis((0, 250, 0), (0, 0, 1)))

    # 草图20 → 切除-拉伸12 (cut, two sides: drawn at the far end of the back side and taken through both)
    with BuildSketch(Plane(origin=(0, 0, 0), x_dir=(0, 0, -1), z_dir=(1, 0, 0)).offset(-CUT_EXTRUDE_12_DEPTH_BACK)):
        Polygon((-125, 320), (-100, 320), (86.391233393, 320), (86.391233393, -40.749673817), (-162.32877764, -40.749673817), (-162.32877764, 320), align=None)
    extrude(amount=CUT_EXTRUDE_12_DEPTH + CUT_EXTRUDE_12_DEPTH_BACK, mode=Mode.SUBTRACT)

    # 草图22 → 切除-拉伸13 (cut, two sides: drawn at the far end of the back side and taken through both)
    with BuildSketch(Plane.XZ.offset(-320).offset(-CUT_EXTRUDE_13_DEPTH_BACK)):
        with Locations((21, 50)):
            Circle(SKETCH_22_R)
        with Locations((-21, 50)):
            Circle(SKETCH_22_R_2)
        with Locations((45.5, 75)):
            Circle(SKETCH_22_R)
        with Locations((45.5, 25)):
            Circle(SKETCH_22_R)
        with Locations(Location((-45.5, 25, 0), (0, 0, 180))):
            Circle(SKETCH_22_R)
        with Locations(Location((-45.5, 75, 0), (0, 0, 180))):
            Circle(SKETCH_22_R)
        with Locations((60.621778265, 85)):
            Circle(SKETCH_22_R)
        with Locations(Location((60.621778265, 15, 0), (0, 0, 180))):
            Circle(SKETCH_22_R)
        with Locations((-60.621778265, 15)):
            Circle(SKETCH_22_R)
        with Locations(Location((-60.621778265, 85, 0), (0, 0, 180))):
            Circle(SKETCH_22_R)
    extrude(amount=CUT_EXTRUDE_13_DEPTH + CUT_EXTRUDE_13_DEPTH_BACK, mode=Mode.SUBTRACT)

    # 草图26 → 切除-拉伸15 (cut)
    with BuildSketch(Plane(origin=(0, 330, 0), x_dir=(1, 0, 0), z_dir=(0, 1, 0))):
        with Locations(Location((45.5, -25, 0), (0, 0, 180))):
            Circle(SKETCH_26_R)
        with Locations(Location((45.5, -75, 0), (0, 0, 180))):
            Circle(SKETCH_26_R)
        with Locations(Location((-45.5, -75, 0), (0, 0, 180))):
            Circle(SKETCH_26_R)
        with Locations(Location((-45.5, -25, 0), (0, 0, 180))):
            Circle(SKETCH_26_R)
    extrude(amount=-CUT_EXTRUDE_15_DEPTH, mode=Mode.SUBTRACT)


solid = part.part
